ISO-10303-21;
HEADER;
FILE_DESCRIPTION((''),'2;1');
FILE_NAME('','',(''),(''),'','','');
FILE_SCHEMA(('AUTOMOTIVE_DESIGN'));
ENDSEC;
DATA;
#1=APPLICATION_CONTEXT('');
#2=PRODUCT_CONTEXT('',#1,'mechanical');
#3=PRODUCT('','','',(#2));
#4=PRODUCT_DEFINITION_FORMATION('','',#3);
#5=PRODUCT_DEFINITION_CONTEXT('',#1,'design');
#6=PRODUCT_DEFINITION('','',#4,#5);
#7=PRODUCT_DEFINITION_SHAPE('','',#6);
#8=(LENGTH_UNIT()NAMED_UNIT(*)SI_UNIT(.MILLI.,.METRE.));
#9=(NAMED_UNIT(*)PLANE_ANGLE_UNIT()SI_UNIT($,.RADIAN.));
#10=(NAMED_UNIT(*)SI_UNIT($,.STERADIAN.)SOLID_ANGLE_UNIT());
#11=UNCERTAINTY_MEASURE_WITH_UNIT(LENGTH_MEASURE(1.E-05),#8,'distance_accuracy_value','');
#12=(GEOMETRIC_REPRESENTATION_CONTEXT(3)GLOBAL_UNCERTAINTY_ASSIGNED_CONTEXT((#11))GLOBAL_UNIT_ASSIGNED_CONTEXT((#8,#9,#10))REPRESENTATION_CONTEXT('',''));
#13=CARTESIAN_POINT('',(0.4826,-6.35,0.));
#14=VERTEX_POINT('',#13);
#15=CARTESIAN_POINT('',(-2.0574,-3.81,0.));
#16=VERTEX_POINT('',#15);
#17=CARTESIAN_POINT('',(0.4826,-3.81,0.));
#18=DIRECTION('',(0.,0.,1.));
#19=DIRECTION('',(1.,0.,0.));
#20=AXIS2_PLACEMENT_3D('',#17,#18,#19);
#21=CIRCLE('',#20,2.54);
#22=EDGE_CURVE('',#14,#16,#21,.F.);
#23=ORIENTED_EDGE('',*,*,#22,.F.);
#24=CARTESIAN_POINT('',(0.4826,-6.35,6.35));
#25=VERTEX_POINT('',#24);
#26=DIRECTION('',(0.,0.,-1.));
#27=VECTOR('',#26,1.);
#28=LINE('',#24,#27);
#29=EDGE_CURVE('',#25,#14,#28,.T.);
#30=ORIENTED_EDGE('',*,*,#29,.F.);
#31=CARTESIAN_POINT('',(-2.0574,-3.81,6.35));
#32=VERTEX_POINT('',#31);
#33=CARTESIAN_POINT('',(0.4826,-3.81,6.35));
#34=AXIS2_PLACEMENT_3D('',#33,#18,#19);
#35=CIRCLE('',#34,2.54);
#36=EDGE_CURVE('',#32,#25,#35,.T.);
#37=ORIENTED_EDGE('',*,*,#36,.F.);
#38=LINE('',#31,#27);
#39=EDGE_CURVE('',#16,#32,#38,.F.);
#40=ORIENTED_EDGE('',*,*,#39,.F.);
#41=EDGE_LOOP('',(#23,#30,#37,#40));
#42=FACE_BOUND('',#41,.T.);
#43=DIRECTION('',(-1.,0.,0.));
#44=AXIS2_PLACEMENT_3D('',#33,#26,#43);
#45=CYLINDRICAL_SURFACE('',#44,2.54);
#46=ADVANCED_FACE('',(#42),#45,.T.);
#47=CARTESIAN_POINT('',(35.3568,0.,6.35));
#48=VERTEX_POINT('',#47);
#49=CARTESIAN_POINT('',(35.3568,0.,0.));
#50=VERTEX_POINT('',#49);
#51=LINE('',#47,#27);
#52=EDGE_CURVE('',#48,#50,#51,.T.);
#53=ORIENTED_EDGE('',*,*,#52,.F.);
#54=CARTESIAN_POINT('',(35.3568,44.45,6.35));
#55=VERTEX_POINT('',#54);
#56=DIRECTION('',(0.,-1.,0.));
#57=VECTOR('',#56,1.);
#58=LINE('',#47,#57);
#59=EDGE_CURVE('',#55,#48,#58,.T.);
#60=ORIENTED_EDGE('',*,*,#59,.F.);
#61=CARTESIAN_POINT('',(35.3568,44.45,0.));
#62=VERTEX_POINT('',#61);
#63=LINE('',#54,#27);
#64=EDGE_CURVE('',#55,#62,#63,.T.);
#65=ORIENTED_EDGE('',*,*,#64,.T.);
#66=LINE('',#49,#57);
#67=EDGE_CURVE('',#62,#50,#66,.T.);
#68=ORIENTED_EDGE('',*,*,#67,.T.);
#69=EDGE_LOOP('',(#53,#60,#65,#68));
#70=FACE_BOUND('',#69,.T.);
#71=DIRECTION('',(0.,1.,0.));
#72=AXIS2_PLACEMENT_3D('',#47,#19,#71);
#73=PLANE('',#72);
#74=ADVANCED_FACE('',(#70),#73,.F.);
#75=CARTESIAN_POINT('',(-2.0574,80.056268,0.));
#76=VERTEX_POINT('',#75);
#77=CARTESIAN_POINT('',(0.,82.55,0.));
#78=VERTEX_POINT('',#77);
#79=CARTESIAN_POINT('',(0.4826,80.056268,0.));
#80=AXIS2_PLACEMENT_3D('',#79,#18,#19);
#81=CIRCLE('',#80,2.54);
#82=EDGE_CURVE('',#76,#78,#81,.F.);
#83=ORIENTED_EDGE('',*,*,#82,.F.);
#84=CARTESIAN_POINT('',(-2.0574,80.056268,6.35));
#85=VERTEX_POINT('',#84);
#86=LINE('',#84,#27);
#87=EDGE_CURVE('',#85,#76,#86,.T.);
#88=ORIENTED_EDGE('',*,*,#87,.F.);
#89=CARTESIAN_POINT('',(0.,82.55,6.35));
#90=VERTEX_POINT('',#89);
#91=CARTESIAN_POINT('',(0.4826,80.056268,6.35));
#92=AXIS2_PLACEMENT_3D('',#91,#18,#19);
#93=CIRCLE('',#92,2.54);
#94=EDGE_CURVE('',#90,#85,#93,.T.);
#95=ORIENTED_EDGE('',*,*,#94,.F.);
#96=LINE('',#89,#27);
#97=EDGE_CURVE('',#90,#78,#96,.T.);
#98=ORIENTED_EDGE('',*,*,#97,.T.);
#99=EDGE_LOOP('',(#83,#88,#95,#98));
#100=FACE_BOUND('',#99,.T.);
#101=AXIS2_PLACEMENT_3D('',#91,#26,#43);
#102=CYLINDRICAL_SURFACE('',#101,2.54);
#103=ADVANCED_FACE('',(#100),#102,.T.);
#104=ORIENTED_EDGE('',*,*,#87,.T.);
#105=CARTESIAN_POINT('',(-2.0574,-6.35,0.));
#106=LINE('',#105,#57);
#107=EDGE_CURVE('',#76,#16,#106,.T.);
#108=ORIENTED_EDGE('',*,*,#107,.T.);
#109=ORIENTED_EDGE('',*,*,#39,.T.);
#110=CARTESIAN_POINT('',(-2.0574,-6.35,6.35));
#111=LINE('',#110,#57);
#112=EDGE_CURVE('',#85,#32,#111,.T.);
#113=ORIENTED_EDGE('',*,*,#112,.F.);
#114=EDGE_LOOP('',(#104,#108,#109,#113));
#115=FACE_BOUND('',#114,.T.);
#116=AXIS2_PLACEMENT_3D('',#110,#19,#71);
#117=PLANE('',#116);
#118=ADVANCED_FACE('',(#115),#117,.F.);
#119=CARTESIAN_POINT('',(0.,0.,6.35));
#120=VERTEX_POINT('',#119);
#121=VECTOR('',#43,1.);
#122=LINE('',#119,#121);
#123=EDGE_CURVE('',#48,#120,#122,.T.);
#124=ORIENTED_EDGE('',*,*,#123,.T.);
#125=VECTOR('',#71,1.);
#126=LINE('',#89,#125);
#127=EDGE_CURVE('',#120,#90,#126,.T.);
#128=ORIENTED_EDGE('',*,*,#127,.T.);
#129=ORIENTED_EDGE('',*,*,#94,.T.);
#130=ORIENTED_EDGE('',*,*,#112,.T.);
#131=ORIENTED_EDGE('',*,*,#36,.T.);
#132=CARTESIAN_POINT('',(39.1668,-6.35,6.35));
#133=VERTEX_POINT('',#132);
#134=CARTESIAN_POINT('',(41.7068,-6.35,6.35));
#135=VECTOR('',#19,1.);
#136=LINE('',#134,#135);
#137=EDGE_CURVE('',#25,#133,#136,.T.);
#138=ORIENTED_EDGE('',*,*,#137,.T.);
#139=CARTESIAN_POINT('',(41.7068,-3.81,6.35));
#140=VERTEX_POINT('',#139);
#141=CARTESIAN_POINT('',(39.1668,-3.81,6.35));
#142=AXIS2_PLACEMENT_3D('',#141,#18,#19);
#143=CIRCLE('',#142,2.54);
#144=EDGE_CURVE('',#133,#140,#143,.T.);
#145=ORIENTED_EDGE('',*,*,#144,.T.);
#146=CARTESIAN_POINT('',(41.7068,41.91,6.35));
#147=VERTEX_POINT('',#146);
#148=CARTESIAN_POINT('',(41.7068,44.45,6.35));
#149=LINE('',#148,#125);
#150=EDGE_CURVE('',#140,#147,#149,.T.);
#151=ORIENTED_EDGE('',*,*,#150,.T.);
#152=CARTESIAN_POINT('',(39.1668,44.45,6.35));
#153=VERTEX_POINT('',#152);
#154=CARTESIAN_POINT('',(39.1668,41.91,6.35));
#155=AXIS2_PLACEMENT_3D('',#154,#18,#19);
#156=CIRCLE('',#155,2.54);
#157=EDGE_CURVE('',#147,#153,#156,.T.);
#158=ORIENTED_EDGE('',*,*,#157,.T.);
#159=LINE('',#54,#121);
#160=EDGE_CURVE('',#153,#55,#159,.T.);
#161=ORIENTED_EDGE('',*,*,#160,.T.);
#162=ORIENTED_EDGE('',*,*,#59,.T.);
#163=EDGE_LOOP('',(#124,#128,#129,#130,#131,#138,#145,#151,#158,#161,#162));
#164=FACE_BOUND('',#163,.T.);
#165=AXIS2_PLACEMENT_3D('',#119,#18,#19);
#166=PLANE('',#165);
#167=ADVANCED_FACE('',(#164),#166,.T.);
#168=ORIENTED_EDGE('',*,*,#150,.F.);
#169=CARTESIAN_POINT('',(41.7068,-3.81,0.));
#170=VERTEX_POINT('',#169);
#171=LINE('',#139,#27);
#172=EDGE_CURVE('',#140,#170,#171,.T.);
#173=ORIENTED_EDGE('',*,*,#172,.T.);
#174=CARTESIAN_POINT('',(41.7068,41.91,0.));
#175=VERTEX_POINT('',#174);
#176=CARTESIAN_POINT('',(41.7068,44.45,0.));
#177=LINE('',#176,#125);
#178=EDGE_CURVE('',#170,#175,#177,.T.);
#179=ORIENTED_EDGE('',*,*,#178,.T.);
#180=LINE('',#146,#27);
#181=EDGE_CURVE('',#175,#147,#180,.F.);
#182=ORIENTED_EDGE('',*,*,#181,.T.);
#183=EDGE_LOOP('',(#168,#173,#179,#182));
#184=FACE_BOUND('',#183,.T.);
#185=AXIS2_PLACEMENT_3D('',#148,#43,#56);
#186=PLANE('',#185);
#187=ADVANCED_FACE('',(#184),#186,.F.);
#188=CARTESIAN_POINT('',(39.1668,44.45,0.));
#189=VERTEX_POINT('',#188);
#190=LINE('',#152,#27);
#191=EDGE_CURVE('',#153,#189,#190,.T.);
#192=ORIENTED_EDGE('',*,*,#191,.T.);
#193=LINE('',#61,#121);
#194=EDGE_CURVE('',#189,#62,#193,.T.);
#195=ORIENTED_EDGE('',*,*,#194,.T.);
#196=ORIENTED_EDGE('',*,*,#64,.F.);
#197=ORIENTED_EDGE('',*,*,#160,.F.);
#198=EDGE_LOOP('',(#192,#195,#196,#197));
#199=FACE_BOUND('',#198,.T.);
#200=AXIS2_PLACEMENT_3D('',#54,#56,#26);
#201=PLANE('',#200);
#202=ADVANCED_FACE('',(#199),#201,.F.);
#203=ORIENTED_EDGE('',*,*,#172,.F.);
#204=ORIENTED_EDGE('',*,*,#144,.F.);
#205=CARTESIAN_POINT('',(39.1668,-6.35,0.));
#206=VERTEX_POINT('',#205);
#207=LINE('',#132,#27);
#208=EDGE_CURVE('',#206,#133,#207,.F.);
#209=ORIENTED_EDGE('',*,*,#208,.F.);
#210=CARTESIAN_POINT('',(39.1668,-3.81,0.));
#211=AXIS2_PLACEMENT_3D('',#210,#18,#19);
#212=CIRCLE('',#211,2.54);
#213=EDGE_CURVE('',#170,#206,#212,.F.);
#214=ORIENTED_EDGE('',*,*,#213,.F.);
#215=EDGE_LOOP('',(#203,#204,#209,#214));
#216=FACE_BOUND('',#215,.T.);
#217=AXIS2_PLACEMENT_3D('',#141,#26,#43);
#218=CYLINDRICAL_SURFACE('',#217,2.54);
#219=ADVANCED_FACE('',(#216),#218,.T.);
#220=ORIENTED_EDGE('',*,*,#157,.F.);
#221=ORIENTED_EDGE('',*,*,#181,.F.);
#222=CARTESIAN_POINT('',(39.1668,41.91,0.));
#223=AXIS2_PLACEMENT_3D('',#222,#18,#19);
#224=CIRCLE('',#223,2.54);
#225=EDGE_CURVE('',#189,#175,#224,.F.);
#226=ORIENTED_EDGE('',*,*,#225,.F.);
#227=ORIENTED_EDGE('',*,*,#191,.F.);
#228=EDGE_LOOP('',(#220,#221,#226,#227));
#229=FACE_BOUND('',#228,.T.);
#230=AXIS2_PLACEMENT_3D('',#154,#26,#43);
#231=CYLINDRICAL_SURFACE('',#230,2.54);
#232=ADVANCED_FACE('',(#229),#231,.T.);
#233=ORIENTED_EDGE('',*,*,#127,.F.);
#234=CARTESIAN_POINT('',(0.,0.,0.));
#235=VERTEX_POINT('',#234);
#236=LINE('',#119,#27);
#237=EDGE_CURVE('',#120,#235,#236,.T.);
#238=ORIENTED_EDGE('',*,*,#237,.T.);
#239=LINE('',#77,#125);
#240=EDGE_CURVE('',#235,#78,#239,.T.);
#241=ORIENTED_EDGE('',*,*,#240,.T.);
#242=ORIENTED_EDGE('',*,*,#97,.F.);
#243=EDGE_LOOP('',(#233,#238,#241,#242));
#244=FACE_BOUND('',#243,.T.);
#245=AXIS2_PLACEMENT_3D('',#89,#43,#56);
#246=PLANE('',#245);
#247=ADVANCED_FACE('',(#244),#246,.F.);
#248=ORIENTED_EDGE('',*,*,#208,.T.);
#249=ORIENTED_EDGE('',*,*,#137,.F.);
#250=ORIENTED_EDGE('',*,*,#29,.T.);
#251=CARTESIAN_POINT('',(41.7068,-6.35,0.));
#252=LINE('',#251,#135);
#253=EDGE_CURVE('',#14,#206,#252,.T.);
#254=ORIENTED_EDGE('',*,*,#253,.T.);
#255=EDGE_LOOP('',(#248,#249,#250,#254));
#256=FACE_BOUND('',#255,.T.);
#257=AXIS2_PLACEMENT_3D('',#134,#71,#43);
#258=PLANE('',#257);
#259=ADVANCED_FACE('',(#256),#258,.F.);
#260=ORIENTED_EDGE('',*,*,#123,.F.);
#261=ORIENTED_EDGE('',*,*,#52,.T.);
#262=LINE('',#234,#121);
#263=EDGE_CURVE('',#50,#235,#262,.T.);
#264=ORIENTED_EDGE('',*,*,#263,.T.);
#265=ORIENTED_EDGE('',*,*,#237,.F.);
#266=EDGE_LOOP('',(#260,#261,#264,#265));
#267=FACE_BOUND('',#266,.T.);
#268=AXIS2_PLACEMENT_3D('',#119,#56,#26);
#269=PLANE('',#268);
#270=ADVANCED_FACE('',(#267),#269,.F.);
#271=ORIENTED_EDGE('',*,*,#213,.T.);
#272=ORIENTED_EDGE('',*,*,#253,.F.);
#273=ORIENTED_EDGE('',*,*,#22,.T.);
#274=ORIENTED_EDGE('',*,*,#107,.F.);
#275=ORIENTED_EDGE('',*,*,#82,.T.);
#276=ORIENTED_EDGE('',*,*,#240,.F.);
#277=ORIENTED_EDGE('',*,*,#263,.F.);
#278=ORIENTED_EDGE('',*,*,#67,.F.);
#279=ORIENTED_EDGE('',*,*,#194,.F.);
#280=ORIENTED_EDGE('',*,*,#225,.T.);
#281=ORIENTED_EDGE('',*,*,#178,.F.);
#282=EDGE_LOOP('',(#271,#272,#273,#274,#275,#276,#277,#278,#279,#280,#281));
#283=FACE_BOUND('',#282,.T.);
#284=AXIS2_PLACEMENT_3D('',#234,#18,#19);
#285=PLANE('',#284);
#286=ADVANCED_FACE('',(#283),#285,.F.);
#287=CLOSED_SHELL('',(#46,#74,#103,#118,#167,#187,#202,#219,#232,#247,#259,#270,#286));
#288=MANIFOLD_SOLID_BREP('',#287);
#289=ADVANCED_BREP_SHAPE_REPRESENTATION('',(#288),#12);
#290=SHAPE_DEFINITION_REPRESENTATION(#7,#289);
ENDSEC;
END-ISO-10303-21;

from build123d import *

# Parameters (mm, degrees)
BOSS_EXTRUDE1_DEPTH = 6.35
FILLET1_R           = 2.54


with BuildPart() as part:
    # Sketch1 → Boss-Extrude1 (new body)
    with BuildSketch(Plane.XY):
        Polygon((0, 0), (35.3568, 0), (35.3568, 44.45), (41.7068, 44.45), (41.7068, -6.35), (-2.0574, -6.35), (-2.0574, 82.55), (0, 82.55), align=None)
    extrude(amount=BOSS_EXTRUDE1_DEPTH)

    # Fillet1
    # the kernel refuses this fillet: 2.54 mm, written as the material it takes off along each edge
    with BuildSketch(Plane(origin=(41.7068, 44.45, -6.35), x_dir=(-1, 0, 0), z_dir=(0, 0, 1)), Plane(origin=(-2.0574, -6.35, -6.35), x_dir=(1, 0, 0), z_dir=(0, 0, 1)), Plane(origin=(41.7068, -6.35, -6.35), x_dir=(0, 1, 0), z_dir=(0, 0, 1))) as fillet1_piece_1:
        with BuildLine():
            CenterArc((FILLET1_R, FILLET1_R), FILLET1_R, 180, 90)
            Line((0, FILLET1_R), (-FILLET1_R * 0.02, FILLET1_R))
            Line((-FILLET1_R * 0.02, FILLET1_R), (-FILLET1_R * 0.02, -FILLET1_R * 0.02))
            Line((-FILLET1_R * 0.02, -FILLET1_R * 0.02), (FILLET1_R, -FILLET1_R * 0.02))
            Line((FILLET1_R, -FILLET1_R * 0.02), (FILLET1_R, 0))
        make_face()
    extrude(amount=19.05, mode=Mode.SUBTRACT)
    with BuildSketch(Plane(origin=(-2.0574, 82.55, -6.234328974), x_dir=(0, -1, 0), z_dir=(0, 0, 1))) as fillet1_piece_2:
        with BuildLine():
            CenterArc((2.493731589, 2.54), FILLET1_R, 190.952784199, 79.047215801)
            Line((0, 2.0574), (-0.049874632, 2.047748))
            ThreePointArc((-0.049874632, 2.047748), (-0.0508, 1.0287), (-0.0508, 0))
            Line((-0.0508, 0), (0, -0.0508))
            Line((0, -0.0508), (2.493731589, -0.0508))
            Line((2.493731589, -0.0508), (2.493731589, 0))
        make_face()
    extrude(amount=18.818657947, mode=Mode.SUBTRACT)


solid = part.part
